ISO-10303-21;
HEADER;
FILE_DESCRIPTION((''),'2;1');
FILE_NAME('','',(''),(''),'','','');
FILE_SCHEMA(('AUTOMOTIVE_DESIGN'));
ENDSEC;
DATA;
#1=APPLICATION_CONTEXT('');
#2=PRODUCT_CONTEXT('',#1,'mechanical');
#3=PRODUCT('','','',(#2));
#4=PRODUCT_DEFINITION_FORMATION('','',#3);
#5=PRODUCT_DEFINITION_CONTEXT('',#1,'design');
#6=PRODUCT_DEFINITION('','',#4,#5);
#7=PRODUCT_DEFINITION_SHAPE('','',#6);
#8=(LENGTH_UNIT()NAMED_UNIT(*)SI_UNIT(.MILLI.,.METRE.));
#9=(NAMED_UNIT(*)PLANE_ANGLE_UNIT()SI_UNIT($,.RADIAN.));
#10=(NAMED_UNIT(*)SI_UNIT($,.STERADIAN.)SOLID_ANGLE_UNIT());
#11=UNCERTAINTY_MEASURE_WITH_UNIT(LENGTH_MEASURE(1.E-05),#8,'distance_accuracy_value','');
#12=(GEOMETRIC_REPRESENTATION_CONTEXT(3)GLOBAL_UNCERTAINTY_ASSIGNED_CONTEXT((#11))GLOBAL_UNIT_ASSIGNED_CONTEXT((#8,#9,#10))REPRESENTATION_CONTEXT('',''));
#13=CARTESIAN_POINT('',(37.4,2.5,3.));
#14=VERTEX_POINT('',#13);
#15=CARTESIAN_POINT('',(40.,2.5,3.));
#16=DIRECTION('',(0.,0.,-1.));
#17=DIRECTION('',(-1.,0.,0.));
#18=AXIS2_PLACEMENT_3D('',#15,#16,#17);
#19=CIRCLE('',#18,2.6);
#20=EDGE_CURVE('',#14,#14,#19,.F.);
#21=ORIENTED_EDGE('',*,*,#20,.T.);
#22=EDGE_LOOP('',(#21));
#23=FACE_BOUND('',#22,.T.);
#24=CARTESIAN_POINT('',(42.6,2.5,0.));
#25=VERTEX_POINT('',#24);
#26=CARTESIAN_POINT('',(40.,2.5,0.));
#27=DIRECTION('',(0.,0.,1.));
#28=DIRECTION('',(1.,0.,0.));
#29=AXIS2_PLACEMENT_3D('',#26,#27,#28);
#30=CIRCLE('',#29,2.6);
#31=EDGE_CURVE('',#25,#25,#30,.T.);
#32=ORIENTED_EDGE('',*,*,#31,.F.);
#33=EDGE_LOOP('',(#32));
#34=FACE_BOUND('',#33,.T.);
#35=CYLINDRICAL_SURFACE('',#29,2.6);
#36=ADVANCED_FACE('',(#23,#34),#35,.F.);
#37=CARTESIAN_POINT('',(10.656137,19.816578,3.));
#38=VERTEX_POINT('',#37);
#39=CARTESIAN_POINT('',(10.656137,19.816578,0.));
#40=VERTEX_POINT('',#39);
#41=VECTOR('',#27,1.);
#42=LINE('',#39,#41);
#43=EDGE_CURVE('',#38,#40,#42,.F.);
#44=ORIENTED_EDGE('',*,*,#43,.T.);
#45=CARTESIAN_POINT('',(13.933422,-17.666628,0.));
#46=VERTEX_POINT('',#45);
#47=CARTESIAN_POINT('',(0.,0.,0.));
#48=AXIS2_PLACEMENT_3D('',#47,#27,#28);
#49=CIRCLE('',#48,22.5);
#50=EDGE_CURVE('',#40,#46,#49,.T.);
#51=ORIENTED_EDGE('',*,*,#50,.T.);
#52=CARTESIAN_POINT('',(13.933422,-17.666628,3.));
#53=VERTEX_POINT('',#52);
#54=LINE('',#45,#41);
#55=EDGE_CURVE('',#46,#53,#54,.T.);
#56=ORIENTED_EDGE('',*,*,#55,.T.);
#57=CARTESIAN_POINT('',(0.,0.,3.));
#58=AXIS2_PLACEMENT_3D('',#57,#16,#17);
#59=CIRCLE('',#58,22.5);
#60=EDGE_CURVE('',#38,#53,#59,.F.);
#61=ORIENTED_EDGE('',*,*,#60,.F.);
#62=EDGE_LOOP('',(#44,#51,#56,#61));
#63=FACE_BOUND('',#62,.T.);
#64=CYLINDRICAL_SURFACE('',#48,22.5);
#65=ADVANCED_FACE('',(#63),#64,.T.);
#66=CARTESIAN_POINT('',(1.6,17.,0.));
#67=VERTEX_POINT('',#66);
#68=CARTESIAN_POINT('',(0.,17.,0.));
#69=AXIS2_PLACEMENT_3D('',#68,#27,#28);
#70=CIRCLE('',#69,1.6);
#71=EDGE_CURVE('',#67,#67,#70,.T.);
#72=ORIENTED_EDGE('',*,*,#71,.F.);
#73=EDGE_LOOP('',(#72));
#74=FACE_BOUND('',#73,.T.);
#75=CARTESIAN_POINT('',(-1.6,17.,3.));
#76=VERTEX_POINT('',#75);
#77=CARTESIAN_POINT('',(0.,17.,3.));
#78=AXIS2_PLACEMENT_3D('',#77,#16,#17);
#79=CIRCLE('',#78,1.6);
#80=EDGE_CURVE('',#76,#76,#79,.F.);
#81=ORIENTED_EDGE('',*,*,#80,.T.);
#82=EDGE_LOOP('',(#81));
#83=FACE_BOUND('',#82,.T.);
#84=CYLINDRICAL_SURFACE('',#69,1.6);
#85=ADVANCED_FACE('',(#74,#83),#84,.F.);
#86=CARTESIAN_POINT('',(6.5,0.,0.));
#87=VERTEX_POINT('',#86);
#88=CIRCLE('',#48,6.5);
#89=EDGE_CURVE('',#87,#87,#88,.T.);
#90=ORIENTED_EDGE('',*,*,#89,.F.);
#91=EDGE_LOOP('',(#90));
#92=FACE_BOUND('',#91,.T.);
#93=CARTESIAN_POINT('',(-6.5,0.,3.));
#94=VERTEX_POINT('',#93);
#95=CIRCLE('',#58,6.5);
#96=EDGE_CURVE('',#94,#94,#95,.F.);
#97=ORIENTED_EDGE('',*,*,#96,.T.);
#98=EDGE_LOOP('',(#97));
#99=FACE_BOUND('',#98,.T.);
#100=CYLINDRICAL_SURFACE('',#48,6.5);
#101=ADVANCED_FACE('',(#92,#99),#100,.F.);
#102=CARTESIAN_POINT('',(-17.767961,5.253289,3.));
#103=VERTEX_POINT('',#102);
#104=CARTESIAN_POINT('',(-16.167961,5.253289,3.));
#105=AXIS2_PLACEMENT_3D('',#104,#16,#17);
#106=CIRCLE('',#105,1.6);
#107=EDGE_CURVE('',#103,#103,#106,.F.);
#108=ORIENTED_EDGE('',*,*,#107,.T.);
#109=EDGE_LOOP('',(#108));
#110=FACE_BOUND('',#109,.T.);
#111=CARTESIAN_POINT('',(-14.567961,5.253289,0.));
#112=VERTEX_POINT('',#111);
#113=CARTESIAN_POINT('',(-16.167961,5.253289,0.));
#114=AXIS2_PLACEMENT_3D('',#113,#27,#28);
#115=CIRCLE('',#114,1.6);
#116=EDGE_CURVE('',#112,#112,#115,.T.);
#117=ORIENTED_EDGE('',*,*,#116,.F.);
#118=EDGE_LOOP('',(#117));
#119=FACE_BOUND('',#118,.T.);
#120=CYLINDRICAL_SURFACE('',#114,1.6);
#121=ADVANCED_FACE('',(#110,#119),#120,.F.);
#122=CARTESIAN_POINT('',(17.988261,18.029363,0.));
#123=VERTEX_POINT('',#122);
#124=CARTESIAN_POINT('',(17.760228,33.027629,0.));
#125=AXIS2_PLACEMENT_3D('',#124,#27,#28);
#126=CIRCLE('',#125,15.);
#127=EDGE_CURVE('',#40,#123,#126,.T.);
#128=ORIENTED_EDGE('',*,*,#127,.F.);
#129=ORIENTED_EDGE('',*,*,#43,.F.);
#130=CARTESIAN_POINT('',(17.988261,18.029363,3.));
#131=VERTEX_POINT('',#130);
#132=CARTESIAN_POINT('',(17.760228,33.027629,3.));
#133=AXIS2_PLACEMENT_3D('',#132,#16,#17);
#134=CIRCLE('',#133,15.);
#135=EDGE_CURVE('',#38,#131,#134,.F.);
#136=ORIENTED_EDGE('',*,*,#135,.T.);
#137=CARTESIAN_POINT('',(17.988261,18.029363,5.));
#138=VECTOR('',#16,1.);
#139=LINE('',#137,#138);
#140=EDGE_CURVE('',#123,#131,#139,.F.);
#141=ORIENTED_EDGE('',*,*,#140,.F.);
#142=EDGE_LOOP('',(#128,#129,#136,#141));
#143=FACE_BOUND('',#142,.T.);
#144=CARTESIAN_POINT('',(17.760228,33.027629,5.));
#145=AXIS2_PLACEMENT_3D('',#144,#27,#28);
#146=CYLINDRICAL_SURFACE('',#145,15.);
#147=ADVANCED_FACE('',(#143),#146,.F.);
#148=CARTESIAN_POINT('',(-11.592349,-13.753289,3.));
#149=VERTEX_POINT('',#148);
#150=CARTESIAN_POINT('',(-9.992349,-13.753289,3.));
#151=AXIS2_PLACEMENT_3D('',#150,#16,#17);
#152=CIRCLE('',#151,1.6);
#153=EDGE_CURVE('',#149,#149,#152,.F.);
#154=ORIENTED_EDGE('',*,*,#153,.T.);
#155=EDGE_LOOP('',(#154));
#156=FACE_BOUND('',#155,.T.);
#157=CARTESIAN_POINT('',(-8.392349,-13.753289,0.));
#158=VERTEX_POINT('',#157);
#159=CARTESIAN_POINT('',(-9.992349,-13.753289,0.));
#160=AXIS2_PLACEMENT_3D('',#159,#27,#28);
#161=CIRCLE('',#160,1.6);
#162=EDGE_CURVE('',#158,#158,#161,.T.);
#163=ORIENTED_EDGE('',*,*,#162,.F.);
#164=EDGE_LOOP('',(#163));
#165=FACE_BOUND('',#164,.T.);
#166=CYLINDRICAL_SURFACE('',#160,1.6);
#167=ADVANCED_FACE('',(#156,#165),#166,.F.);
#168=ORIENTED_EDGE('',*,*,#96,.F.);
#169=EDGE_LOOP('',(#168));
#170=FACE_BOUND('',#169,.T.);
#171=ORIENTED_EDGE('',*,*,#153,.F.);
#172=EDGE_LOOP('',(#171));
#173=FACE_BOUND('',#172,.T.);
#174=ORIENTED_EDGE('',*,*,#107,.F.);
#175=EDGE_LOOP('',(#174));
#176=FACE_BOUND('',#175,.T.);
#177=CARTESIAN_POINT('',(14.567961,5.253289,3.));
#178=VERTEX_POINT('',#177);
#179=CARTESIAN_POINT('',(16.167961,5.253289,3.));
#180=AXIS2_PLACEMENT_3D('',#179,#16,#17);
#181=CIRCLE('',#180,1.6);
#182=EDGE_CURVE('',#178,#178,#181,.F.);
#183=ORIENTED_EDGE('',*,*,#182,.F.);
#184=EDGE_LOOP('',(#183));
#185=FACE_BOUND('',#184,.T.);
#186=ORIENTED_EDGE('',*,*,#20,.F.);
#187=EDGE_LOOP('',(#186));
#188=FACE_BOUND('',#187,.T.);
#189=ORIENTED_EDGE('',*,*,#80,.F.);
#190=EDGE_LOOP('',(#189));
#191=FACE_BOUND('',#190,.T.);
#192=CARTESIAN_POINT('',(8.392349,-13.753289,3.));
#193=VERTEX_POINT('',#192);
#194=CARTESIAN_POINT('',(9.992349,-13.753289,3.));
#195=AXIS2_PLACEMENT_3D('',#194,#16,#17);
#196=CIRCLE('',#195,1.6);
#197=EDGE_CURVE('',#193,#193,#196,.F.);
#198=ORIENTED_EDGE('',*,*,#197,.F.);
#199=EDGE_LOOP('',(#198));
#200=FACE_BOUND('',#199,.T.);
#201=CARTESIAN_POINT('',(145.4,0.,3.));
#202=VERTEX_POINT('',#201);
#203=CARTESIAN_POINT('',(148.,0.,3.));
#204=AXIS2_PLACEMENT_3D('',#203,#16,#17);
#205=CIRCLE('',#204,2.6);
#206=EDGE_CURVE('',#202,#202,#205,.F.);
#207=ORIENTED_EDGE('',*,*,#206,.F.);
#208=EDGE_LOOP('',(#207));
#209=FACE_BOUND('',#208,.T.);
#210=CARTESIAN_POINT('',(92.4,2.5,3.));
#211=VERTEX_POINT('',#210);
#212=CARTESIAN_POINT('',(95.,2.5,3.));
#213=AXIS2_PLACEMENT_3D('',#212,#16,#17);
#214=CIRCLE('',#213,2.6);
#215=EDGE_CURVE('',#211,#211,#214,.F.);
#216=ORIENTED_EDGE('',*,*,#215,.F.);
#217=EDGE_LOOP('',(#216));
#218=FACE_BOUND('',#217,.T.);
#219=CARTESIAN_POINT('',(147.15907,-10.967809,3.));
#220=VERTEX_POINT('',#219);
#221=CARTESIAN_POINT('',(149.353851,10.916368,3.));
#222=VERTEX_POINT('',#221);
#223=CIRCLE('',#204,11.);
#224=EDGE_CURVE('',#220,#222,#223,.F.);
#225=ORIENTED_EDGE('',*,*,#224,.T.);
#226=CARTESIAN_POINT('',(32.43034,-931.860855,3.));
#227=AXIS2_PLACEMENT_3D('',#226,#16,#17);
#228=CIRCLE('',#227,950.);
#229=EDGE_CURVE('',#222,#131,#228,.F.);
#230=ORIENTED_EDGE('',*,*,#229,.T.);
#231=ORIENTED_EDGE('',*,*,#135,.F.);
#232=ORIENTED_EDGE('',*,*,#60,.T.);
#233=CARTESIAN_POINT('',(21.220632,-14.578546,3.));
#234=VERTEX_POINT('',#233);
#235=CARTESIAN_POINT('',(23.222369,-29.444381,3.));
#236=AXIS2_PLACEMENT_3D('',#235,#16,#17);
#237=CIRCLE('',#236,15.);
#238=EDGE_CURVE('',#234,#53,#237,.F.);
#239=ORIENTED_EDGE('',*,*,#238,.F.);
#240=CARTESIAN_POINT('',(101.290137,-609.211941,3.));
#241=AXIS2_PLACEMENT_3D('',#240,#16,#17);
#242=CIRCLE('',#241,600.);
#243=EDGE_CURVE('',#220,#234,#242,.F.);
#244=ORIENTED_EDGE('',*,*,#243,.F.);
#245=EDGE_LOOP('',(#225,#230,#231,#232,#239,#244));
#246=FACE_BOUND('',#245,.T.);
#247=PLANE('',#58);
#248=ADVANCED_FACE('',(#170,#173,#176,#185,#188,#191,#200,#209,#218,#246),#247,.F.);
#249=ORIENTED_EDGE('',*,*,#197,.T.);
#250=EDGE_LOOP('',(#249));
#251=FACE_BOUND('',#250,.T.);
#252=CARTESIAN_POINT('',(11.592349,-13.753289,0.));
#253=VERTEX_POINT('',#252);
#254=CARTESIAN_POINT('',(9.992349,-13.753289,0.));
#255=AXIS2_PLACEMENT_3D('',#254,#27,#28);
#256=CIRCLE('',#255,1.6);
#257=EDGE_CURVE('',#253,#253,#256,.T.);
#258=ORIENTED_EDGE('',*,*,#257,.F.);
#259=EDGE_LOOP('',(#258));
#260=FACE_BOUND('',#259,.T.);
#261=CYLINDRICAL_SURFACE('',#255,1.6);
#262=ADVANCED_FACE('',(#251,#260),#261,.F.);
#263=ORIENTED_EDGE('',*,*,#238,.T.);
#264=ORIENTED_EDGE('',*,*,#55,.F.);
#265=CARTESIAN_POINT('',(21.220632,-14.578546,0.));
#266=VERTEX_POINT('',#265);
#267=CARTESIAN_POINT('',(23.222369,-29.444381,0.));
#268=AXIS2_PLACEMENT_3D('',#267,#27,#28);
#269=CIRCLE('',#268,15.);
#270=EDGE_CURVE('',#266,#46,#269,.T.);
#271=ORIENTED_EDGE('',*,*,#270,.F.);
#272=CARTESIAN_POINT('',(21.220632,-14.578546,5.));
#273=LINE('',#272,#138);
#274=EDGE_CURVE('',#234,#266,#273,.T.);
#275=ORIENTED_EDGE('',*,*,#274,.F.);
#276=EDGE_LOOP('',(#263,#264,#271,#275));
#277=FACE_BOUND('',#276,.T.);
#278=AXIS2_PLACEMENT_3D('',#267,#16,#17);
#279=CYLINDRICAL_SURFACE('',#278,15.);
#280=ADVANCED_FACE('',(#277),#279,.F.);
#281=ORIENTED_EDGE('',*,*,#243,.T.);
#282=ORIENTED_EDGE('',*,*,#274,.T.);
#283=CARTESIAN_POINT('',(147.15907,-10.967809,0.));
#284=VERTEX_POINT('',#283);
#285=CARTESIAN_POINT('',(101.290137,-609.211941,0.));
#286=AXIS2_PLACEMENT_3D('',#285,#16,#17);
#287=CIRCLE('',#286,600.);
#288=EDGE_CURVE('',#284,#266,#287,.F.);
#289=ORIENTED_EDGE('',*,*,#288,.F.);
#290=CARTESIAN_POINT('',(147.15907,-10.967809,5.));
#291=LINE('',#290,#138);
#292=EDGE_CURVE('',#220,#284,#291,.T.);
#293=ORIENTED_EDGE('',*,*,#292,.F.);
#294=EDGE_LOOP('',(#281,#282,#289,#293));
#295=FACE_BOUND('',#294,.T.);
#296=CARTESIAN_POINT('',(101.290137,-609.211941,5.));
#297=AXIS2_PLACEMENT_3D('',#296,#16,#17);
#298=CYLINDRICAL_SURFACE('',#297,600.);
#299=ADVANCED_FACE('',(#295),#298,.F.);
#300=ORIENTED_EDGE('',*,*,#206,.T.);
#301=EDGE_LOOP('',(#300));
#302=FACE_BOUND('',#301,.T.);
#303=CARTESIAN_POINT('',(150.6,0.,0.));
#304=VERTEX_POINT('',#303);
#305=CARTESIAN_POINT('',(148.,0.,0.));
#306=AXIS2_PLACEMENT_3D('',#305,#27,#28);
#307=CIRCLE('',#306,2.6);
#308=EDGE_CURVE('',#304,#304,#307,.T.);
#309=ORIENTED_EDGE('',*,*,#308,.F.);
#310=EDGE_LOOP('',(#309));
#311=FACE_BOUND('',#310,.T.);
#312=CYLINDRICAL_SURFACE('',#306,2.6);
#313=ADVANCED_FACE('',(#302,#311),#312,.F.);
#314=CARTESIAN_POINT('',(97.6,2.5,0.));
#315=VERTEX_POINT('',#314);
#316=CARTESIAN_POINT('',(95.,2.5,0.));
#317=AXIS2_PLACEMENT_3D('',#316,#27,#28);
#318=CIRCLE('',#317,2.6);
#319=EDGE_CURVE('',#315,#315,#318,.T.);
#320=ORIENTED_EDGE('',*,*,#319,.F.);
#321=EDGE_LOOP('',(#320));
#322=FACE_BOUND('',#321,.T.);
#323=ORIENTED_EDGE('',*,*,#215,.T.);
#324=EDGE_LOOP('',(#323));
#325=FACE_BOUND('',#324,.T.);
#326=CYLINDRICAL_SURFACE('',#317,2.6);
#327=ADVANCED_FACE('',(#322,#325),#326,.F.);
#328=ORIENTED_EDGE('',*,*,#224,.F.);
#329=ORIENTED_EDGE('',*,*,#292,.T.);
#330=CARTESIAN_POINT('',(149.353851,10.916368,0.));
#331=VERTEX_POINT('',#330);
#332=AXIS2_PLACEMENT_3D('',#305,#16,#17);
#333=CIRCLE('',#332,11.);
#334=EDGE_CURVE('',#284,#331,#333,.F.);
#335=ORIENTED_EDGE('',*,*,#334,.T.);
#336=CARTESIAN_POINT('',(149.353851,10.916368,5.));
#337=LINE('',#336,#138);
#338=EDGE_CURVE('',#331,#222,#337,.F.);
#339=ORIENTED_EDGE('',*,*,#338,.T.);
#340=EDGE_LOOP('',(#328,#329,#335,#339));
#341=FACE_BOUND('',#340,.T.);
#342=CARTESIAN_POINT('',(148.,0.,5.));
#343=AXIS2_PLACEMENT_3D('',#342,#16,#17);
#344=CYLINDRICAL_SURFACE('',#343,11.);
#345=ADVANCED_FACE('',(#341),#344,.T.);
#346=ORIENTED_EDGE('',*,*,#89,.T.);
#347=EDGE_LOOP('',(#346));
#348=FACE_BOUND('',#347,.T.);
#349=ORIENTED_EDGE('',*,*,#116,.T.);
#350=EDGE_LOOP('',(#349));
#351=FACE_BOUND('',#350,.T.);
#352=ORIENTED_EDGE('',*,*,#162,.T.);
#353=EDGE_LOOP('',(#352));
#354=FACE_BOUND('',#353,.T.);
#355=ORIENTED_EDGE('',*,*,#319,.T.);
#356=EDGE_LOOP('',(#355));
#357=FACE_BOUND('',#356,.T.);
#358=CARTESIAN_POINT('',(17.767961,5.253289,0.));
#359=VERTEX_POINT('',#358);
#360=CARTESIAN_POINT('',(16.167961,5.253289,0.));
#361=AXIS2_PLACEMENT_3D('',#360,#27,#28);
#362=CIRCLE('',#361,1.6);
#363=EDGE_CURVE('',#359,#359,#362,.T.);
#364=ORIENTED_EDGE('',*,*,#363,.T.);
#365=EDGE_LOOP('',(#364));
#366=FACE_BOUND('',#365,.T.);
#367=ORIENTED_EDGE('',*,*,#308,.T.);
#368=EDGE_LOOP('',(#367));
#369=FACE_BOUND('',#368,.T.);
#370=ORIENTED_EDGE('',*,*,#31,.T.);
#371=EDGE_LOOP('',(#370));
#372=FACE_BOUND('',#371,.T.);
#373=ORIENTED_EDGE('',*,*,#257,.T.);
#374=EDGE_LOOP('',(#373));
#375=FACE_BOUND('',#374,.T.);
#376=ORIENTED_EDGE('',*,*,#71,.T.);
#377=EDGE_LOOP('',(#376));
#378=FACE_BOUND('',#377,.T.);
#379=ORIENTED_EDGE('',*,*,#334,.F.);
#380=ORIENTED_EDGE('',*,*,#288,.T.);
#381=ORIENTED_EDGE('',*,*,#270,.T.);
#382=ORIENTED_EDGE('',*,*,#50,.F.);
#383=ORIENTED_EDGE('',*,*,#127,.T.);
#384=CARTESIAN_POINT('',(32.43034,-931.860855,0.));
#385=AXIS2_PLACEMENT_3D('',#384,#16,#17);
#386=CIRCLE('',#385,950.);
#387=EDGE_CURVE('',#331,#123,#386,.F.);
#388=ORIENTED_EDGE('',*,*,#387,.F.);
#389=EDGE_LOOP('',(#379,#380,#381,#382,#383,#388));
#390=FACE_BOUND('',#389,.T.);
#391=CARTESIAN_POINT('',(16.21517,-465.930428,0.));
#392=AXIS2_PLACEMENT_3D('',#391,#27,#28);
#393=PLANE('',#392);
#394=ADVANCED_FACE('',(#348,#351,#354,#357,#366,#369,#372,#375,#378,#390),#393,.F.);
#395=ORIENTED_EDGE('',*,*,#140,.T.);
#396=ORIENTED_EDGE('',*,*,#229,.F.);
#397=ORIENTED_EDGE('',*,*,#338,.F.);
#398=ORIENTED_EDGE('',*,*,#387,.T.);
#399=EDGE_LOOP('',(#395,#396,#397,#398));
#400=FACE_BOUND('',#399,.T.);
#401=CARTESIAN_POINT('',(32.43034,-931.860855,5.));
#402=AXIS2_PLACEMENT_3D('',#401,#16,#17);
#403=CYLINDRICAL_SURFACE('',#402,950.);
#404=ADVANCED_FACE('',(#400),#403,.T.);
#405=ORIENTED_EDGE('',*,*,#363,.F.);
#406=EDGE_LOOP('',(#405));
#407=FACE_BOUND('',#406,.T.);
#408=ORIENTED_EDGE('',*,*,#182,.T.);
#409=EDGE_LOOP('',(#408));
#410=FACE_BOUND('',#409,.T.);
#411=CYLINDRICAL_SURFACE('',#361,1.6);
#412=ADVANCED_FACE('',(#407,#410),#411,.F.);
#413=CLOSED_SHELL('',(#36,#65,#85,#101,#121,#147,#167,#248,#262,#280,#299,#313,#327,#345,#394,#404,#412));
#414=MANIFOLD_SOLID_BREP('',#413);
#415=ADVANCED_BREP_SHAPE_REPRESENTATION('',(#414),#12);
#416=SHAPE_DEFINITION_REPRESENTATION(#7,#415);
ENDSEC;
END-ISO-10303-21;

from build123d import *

# Parameters (mm, degrees)
BOSS_EXTRUDE1_START     = -5
BOSS_EXTRUDE1_OUTLINE_R = 1.925
BOSS_EXTRUDE1_DEPTH     = 5
SKETCH4_R               = 1.6
CUT_EXTRUDE2_DEPTH      = 161.661912101
FILLET1_R               = 15
SKETCH5_R               = 6.5
SKETCH5_R_2             = 2.6
CUT_EXTRUDE4_DEPTH      = 161.661912218
SKETCH6_W               = 233.09675901
SKETCH6_H               = 87.107773224
CUT_EXTRUDE5_DEPTH      = 2


with BuildPart() as part:
    # Boss-Extrude1: read off the stored shape, not the designer's step
    # Boss-Extrude1 outline → Boss-Extrude1 (new body)
    with BuildSketch(Plane.XY.offset(5).offset(BOSS_EXTRUDE1_START)):
        with BuildLine():
            ThreePointArc((149.353851183, 10.916367847), (81.584978704, 16.866619507), (13.564040933, 17.951790818))
            ThreePointArc((13.564040933, 17.951790818), (-22.408339146, -2.028875729), (16.567779435, -15.223622585))
            ThreePointArc((16.567779435, -15.223622585), (81.747231754, -9.530296146), (147.159069574, -10.96780908))
            ThreePointArc((147.159069574, -10.96780908), (158.945093507, -1.097692183), (149.353851183, 10.916367847))
        make_face()
        with Locations((40, 2.5)):
            Circle(BOSS_EXTRUDE1_OUTLINE_R, mode=Mode.SUBTRACT)
        with Locations((95, 2.5)):
            Circle(BOSS_EXTRUDE1_OUTLINE_R, mode=Mode.SUBTRACT)
    extrude(amount=BOSS_EXTRUDE1_DEPTH)

    # Sketch4 → Cut-Extrude2 (cut, through all)
    with BuildSketch(Plane.XY.offset(5)):
        with Locations((0, 17)):
            Circle(SKETCH4_R)
        with Locations((16.167960777, 5.253288904)):
            Circle(SKETCH4_R)
        with Locations((9.992349289, -13.753288904)):
            Circle(SKETCH4_R)
        with Locations((-9.992349289, -13.753288904)):
            Circle(SKETCH4_R)
        with Locations((-16.167960777, 5.253288904)):
            Circle(SKETCH4_R)
    extrude(amount=-CUT_EXTRUDE2_DEPTH, mode=Mode.SUBTRACT)

    # Fillet1
    fillet1_edges = [part.edges().sort_by_distance(p)[0] for p in [
        (16.567779435, -15.223622585, 2.5),
        (13.564040933, 17.951790818, 2.5),
    ]]
    fillet(fillet1_edges, radius=FILLET1_R)

    # Sketch5 → Cut-Extrude4 (cut, through all)
    with BuildSketch(Plane.XY.offset(5)):
        Circle(SKETCH5_R)
        with Locations((148, 0)):
            Circle(SKETCH5_R_2)
        with Locations((95, 2.5)):
            Circle(SKETCH5_R_2)
        with Locations((40, 2.5)):
            Circle(SKETCH5_R_2)
    extrude(amount=-CUT_EXTRUDE4_DEPTH, mode=Mode.SUBTRACT)

    # Sketch6 → Cut-Extrude5 (cut)
    with BuildSketch(Plane.XY.offset(5)):
        with Locations((68.481602645, 0)):
            Rectangle(SKETCH6_W, SKETCH6_H)
    extrude(amount=-CUT_EXTRUDE5_DEPTH, mode=Mode.SUBTRACT)


solid = part.part
